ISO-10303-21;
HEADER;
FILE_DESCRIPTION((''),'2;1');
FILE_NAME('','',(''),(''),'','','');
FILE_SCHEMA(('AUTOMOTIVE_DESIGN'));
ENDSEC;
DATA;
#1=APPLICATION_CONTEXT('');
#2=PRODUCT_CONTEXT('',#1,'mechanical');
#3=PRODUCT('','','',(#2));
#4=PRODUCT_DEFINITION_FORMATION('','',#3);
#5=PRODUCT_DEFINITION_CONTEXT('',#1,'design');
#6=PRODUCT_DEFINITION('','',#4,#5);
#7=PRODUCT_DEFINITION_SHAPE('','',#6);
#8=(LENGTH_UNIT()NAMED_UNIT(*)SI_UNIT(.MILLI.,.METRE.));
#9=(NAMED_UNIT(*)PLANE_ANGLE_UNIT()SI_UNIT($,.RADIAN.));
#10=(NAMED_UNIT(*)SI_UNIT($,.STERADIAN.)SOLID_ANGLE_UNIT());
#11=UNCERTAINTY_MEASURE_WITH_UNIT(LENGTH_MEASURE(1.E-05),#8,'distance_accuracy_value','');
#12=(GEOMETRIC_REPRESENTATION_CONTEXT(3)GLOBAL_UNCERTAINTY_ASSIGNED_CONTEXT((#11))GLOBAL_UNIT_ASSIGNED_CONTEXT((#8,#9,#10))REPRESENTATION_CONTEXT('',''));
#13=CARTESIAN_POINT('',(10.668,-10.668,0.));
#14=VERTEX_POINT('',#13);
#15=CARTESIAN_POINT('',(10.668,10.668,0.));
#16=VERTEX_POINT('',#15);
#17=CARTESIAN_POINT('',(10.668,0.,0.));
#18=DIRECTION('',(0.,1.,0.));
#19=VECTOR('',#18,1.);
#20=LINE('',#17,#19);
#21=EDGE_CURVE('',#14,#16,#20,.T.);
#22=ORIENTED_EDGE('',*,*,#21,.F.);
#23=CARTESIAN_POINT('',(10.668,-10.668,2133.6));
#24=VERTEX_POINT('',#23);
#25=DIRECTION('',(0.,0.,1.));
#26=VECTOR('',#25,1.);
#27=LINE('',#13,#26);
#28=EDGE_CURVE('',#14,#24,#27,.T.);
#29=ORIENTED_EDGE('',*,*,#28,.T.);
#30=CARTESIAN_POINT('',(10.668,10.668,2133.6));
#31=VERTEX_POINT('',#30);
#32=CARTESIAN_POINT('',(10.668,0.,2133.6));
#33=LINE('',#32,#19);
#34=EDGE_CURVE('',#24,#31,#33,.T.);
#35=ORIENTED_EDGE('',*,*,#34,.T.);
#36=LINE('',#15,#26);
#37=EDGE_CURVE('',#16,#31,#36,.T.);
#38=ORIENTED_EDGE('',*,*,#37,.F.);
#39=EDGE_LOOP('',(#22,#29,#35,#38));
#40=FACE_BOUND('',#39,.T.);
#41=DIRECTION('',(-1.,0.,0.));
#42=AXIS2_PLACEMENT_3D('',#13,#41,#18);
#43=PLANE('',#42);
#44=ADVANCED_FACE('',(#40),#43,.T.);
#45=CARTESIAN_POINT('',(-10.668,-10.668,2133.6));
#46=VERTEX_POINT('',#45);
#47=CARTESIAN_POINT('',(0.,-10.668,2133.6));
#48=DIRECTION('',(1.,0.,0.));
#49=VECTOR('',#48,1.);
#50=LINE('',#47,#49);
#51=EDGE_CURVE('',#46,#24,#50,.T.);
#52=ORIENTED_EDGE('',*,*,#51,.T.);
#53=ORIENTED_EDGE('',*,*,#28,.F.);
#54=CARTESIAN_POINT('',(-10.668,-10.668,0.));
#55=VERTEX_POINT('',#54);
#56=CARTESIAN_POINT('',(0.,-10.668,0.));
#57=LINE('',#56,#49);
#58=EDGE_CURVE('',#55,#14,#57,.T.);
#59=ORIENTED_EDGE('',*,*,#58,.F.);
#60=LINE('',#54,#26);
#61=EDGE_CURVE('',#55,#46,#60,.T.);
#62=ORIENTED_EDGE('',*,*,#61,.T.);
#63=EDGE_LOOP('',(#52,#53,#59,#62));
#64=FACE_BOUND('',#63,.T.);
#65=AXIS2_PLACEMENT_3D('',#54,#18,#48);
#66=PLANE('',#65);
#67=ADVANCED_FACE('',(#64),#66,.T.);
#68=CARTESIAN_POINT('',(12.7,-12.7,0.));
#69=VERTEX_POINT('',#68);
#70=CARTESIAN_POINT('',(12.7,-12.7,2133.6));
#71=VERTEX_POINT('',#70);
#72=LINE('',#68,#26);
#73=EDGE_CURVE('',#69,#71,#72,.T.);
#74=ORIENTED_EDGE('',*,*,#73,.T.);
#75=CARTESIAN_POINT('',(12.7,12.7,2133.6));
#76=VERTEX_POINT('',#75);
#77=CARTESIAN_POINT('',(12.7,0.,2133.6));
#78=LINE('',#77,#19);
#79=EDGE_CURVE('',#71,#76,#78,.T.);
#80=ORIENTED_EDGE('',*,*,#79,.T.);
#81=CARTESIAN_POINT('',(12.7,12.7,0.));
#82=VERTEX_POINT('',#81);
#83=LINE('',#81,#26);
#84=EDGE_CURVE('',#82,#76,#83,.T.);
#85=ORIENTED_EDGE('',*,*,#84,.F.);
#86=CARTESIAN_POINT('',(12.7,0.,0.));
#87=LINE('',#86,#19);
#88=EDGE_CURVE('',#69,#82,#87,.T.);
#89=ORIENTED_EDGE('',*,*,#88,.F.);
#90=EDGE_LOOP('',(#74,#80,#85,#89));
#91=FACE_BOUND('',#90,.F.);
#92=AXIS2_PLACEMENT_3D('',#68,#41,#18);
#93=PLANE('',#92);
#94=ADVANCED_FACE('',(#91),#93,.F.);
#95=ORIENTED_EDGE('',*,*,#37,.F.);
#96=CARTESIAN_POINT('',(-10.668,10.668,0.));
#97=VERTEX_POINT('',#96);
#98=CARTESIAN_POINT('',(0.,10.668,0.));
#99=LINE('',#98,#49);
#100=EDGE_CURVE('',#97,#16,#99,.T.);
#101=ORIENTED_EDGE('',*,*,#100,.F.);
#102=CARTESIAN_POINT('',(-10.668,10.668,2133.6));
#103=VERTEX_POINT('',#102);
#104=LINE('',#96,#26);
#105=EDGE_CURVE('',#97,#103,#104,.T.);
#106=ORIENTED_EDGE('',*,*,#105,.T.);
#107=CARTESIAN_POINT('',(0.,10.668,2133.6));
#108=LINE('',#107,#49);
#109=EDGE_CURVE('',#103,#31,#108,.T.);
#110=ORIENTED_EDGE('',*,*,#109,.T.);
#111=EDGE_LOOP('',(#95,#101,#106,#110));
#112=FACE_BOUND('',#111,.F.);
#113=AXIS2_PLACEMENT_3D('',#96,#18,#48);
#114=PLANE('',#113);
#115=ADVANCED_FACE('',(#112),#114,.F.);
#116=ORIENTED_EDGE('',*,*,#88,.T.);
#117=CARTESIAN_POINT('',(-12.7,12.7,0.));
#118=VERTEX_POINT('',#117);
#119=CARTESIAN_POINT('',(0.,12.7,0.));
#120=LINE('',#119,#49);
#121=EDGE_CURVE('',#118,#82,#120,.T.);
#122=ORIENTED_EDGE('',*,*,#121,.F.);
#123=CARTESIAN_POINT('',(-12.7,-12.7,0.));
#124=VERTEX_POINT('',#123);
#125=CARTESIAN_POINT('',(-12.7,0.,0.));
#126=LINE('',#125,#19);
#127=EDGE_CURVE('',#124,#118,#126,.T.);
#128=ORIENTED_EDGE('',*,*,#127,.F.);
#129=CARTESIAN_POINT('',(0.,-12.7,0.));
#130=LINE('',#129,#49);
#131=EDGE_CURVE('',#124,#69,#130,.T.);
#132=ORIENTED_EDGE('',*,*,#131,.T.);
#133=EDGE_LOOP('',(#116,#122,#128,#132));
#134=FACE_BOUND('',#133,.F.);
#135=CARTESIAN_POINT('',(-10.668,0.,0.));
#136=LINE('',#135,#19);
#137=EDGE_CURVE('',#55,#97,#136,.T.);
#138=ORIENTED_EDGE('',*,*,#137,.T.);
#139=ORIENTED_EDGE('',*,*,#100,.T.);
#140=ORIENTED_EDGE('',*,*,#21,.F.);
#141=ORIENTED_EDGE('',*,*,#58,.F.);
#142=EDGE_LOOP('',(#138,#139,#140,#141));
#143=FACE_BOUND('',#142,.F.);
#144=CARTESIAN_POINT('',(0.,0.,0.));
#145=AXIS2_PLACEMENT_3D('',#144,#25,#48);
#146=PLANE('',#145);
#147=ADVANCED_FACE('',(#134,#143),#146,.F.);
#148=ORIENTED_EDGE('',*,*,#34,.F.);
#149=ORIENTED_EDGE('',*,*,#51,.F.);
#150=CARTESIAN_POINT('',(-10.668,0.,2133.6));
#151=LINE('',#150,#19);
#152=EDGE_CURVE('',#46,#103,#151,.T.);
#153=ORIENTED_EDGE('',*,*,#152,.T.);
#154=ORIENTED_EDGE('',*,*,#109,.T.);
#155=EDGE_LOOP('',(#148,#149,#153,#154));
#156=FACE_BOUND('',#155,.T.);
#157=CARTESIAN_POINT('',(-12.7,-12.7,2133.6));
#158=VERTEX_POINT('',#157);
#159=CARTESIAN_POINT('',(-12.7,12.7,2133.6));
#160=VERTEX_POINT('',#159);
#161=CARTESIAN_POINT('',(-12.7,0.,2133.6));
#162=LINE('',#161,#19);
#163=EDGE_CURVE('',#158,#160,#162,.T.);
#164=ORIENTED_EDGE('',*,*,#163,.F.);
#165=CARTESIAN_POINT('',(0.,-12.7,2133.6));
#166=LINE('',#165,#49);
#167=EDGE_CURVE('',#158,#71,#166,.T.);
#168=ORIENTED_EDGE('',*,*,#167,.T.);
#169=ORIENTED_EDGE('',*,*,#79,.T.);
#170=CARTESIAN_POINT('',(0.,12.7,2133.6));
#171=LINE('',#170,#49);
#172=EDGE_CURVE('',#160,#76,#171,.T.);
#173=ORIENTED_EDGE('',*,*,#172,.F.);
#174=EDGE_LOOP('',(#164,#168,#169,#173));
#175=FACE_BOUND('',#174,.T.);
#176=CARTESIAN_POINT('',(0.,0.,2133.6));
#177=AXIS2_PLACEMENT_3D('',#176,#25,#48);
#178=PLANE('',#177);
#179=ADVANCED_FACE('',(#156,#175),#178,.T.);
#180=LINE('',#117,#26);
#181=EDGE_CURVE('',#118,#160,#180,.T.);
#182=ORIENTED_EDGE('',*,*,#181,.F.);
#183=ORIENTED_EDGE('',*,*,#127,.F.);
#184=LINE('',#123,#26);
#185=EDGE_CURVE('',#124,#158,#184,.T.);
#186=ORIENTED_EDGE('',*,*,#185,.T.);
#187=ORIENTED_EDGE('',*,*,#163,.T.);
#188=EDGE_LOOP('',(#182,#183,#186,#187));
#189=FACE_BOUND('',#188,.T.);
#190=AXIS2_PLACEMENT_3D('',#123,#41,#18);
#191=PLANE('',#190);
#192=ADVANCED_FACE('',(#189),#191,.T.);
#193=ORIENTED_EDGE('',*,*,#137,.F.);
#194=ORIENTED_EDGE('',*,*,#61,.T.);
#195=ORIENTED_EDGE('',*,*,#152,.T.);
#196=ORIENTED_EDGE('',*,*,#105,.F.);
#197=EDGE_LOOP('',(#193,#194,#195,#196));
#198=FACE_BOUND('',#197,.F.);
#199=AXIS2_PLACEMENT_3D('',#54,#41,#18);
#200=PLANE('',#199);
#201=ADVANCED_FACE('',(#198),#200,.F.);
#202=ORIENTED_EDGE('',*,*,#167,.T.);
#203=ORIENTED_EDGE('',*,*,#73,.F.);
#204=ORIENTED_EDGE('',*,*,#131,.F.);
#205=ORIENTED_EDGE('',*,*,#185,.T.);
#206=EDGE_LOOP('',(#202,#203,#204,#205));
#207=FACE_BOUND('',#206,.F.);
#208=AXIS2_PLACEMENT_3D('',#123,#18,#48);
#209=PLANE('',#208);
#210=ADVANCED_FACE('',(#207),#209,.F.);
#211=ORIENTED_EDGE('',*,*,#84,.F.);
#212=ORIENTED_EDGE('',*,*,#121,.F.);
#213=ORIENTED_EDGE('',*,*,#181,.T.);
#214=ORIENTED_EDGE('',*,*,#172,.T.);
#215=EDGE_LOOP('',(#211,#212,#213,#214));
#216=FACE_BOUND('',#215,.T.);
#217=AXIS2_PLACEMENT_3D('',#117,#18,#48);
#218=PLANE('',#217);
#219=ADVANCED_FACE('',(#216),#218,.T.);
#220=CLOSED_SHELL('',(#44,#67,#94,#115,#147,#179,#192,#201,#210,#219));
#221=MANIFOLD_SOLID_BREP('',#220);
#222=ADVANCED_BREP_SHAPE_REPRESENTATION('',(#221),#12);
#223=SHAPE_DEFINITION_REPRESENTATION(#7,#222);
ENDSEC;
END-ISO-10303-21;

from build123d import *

# Parameters (mm, degrees)
F0_W     = 25.4
F0_H     = 25.4
F0_W_2   = 21.336
F0_H_2   = 21.336
F1_DEPTH = 2133.6


# Not quite as in the source:
# - a feature of the source that left no trace in its solid (it failed there, or was rolled back) is left out


with BuildPart() as f1:
    # F0 (on Top) → F1 (new body)
    with BuildSketch(Plane.XY):
        Rectangle(F0_W, F0_H)
        Rectangle(F0_W_2, F0_H_2, mode=Mode.SUBTRACT)
    extrude(amount=F1_DEPTH)


solid = f1.part
